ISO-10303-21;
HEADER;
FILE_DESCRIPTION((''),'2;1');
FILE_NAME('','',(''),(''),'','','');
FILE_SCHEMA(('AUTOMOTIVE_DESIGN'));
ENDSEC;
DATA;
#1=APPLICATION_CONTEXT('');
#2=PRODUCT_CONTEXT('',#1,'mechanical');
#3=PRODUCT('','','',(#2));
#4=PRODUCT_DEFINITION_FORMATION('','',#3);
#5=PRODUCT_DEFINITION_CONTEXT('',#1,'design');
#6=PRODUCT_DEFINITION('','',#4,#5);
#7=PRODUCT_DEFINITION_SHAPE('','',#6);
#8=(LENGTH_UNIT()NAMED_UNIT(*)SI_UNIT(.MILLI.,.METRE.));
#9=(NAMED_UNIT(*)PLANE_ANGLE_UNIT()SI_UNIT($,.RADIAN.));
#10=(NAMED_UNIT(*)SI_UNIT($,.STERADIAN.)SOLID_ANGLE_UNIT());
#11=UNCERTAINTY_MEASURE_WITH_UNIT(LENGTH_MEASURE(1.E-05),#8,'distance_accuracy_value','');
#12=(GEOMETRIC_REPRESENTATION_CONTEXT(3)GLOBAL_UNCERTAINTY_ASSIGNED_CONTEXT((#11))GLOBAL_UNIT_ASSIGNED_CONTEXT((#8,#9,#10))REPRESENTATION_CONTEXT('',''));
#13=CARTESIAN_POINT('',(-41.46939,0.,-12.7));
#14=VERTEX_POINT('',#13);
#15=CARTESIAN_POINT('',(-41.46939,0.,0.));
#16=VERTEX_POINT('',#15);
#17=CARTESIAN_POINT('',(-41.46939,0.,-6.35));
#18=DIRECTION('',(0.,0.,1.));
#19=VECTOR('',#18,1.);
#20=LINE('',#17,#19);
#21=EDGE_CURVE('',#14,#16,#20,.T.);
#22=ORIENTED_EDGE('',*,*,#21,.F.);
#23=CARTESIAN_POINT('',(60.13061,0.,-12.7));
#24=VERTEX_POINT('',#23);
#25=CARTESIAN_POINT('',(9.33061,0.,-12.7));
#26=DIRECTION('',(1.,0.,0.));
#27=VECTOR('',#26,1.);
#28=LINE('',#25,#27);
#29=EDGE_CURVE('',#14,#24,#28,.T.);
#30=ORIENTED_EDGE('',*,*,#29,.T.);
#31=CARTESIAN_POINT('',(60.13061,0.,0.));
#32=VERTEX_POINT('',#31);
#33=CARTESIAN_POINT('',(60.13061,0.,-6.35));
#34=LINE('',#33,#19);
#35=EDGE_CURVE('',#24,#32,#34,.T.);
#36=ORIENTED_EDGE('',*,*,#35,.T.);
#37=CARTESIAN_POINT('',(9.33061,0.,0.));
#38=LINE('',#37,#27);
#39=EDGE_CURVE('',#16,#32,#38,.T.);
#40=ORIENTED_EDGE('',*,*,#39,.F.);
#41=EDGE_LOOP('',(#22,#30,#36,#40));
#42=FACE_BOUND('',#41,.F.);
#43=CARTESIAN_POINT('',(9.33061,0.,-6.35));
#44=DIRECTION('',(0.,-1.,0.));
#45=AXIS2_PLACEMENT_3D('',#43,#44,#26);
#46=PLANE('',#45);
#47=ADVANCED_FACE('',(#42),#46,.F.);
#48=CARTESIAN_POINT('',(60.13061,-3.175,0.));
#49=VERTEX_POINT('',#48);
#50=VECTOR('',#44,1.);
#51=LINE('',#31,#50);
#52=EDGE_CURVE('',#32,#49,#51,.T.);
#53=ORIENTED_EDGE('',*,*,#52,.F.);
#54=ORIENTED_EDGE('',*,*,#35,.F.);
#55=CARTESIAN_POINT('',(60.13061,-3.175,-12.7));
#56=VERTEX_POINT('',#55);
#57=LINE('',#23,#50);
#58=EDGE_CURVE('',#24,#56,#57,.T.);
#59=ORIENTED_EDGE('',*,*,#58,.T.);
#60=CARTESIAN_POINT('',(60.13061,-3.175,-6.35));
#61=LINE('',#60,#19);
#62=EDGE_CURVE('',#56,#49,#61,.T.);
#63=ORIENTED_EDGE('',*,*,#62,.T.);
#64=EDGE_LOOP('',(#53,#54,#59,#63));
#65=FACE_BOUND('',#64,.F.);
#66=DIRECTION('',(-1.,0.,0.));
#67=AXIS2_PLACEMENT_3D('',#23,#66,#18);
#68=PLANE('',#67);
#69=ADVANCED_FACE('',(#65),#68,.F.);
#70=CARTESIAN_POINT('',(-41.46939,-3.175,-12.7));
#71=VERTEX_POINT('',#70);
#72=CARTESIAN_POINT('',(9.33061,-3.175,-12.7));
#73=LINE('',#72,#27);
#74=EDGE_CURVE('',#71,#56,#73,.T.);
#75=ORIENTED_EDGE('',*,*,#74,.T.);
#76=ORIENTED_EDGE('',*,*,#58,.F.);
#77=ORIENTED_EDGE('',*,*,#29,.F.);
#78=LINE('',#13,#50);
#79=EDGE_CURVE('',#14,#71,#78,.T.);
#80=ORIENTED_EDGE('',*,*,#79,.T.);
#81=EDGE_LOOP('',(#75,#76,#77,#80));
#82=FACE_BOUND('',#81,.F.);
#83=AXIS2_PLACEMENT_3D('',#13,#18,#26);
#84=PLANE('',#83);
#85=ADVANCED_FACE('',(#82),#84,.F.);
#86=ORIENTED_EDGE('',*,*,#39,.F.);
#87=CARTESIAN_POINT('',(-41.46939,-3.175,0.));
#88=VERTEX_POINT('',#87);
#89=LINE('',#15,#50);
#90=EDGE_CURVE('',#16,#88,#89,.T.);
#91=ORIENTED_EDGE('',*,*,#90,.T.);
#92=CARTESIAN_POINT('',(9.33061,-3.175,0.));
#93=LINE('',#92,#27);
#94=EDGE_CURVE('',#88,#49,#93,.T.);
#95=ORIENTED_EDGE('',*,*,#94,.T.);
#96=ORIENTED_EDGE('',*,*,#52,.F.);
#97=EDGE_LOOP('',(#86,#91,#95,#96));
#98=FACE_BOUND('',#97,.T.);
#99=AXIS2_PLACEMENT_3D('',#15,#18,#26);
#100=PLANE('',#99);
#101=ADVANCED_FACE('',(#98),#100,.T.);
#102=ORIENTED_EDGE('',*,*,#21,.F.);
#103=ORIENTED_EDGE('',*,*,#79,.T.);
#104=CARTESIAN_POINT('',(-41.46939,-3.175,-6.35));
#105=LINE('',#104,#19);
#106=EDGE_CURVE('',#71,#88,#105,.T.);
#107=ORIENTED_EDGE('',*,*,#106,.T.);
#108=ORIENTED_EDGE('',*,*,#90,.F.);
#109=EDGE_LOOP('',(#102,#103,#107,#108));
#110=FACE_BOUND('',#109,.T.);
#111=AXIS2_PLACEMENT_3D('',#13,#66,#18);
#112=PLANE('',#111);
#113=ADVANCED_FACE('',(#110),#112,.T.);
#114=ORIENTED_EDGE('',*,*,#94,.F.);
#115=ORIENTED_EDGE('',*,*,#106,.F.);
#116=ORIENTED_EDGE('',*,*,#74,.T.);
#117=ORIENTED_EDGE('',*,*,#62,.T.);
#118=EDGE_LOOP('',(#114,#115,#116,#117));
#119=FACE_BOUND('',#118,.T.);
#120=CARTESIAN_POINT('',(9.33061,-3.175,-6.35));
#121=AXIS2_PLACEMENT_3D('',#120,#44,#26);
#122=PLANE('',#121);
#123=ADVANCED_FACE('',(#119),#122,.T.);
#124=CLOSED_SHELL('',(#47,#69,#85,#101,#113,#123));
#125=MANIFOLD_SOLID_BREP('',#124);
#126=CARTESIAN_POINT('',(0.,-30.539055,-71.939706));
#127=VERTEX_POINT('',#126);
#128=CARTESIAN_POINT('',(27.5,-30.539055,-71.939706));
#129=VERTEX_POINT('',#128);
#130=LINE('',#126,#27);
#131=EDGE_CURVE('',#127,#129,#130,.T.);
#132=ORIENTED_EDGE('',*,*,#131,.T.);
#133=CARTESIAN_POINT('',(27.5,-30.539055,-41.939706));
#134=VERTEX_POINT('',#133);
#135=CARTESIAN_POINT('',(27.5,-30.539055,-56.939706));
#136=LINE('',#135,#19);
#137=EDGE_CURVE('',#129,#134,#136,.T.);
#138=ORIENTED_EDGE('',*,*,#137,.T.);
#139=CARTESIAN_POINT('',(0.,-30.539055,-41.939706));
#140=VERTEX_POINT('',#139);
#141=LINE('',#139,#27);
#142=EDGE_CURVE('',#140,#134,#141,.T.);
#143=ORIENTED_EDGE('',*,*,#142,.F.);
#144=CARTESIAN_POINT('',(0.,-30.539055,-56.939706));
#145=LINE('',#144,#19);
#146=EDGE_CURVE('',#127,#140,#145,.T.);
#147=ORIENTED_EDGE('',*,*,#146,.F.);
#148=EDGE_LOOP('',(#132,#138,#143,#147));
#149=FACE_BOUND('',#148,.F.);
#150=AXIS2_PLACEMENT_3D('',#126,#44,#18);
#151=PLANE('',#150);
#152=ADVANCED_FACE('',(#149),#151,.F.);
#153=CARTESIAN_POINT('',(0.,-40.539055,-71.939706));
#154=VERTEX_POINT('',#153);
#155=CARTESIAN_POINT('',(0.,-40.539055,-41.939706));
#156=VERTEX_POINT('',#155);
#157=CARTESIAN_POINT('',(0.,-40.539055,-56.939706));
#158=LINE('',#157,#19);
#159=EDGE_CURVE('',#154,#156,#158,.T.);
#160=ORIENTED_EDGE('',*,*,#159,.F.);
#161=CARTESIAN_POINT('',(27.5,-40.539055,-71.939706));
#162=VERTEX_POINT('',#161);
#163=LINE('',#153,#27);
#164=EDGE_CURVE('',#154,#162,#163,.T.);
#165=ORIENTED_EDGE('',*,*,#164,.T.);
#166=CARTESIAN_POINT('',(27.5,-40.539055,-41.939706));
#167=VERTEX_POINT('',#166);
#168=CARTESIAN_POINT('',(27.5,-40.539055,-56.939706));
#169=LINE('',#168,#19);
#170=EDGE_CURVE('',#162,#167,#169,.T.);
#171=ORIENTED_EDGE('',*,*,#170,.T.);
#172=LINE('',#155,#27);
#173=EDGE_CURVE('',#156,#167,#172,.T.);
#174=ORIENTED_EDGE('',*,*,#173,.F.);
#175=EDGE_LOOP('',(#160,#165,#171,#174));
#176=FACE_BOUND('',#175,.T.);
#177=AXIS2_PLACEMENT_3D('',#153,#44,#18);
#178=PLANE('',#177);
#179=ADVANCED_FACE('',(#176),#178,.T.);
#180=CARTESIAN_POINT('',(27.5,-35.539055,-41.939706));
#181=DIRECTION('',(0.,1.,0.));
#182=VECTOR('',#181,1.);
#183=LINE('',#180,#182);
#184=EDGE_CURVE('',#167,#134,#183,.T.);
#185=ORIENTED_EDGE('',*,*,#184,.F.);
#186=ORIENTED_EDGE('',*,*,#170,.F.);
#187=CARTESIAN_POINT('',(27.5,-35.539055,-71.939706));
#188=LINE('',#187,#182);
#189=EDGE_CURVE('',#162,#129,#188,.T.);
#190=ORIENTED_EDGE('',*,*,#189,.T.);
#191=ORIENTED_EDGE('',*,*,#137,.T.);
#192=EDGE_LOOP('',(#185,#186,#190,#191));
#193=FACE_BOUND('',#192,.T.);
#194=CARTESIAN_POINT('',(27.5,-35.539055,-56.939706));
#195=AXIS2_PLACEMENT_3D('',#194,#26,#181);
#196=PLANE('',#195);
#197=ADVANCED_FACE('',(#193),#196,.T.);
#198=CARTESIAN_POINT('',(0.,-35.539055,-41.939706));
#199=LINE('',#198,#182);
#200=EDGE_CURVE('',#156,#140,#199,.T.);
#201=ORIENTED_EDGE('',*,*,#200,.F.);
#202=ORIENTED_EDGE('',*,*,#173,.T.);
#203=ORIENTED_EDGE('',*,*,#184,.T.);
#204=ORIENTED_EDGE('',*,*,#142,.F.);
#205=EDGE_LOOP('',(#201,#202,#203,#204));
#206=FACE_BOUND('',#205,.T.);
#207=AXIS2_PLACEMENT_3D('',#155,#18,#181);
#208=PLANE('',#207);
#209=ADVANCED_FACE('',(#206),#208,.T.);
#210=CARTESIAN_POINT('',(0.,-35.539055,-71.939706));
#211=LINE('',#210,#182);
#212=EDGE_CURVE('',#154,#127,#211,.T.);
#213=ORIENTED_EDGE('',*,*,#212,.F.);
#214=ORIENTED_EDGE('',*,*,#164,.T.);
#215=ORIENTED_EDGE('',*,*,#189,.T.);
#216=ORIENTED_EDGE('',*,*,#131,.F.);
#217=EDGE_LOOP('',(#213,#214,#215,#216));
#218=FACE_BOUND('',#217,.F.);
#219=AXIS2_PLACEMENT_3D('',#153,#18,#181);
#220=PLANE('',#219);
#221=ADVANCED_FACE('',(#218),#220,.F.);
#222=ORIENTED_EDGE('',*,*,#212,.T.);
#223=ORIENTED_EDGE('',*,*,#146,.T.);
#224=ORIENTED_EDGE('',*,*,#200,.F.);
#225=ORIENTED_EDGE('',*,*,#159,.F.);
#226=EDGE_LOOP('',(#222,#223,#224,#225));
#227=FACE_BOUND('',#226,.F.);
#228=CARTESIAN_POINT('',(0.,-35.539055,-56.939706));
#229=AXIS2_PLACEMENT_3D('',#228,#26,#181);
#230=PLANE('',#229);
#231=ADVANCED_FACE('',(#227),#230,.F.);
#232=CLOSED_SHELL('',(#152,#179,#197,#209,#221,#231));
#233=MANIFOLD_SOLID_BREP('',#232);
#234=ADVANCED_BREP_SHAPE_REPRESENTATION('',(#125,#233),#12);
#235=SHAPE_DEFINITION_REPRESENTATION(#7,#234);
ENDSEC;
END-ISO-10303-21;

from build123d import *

# Parameters (mm, degrees)
F0_W     = 101.6
F0_H     = 12.7
F1_DEPTH = 3.175
F2_W     = 10
F2_H     = 30
F3_DEPTH = 27.5


# Not quite as in the source:
# - a length typed as a fraction of an inch, garbled in the dataset ("3 / 203.2 mm" for 3/8 in), is restored


with BuildPart() as f1:
    # F0 (on Front) → F1 (new body)
    with BuildSketch(Plane.XZ):
        with Locations((9.3306104093, -6.35)):
            Rectangle(F0_W, F0_H)
    extrude(amount=F1_DEPTH)


with BuildPart() as f3:
    # F2 (on Right) → F3 (new body)
    with BuildSketch(Plane.YZ):
        with Locations((-35.5390549273, -56.9397062063)):
            Rectangle(F2_W, F2_H)
    extrude(amount=F3_DEPTH)


solid = Compound([f1.part, f3.part])
